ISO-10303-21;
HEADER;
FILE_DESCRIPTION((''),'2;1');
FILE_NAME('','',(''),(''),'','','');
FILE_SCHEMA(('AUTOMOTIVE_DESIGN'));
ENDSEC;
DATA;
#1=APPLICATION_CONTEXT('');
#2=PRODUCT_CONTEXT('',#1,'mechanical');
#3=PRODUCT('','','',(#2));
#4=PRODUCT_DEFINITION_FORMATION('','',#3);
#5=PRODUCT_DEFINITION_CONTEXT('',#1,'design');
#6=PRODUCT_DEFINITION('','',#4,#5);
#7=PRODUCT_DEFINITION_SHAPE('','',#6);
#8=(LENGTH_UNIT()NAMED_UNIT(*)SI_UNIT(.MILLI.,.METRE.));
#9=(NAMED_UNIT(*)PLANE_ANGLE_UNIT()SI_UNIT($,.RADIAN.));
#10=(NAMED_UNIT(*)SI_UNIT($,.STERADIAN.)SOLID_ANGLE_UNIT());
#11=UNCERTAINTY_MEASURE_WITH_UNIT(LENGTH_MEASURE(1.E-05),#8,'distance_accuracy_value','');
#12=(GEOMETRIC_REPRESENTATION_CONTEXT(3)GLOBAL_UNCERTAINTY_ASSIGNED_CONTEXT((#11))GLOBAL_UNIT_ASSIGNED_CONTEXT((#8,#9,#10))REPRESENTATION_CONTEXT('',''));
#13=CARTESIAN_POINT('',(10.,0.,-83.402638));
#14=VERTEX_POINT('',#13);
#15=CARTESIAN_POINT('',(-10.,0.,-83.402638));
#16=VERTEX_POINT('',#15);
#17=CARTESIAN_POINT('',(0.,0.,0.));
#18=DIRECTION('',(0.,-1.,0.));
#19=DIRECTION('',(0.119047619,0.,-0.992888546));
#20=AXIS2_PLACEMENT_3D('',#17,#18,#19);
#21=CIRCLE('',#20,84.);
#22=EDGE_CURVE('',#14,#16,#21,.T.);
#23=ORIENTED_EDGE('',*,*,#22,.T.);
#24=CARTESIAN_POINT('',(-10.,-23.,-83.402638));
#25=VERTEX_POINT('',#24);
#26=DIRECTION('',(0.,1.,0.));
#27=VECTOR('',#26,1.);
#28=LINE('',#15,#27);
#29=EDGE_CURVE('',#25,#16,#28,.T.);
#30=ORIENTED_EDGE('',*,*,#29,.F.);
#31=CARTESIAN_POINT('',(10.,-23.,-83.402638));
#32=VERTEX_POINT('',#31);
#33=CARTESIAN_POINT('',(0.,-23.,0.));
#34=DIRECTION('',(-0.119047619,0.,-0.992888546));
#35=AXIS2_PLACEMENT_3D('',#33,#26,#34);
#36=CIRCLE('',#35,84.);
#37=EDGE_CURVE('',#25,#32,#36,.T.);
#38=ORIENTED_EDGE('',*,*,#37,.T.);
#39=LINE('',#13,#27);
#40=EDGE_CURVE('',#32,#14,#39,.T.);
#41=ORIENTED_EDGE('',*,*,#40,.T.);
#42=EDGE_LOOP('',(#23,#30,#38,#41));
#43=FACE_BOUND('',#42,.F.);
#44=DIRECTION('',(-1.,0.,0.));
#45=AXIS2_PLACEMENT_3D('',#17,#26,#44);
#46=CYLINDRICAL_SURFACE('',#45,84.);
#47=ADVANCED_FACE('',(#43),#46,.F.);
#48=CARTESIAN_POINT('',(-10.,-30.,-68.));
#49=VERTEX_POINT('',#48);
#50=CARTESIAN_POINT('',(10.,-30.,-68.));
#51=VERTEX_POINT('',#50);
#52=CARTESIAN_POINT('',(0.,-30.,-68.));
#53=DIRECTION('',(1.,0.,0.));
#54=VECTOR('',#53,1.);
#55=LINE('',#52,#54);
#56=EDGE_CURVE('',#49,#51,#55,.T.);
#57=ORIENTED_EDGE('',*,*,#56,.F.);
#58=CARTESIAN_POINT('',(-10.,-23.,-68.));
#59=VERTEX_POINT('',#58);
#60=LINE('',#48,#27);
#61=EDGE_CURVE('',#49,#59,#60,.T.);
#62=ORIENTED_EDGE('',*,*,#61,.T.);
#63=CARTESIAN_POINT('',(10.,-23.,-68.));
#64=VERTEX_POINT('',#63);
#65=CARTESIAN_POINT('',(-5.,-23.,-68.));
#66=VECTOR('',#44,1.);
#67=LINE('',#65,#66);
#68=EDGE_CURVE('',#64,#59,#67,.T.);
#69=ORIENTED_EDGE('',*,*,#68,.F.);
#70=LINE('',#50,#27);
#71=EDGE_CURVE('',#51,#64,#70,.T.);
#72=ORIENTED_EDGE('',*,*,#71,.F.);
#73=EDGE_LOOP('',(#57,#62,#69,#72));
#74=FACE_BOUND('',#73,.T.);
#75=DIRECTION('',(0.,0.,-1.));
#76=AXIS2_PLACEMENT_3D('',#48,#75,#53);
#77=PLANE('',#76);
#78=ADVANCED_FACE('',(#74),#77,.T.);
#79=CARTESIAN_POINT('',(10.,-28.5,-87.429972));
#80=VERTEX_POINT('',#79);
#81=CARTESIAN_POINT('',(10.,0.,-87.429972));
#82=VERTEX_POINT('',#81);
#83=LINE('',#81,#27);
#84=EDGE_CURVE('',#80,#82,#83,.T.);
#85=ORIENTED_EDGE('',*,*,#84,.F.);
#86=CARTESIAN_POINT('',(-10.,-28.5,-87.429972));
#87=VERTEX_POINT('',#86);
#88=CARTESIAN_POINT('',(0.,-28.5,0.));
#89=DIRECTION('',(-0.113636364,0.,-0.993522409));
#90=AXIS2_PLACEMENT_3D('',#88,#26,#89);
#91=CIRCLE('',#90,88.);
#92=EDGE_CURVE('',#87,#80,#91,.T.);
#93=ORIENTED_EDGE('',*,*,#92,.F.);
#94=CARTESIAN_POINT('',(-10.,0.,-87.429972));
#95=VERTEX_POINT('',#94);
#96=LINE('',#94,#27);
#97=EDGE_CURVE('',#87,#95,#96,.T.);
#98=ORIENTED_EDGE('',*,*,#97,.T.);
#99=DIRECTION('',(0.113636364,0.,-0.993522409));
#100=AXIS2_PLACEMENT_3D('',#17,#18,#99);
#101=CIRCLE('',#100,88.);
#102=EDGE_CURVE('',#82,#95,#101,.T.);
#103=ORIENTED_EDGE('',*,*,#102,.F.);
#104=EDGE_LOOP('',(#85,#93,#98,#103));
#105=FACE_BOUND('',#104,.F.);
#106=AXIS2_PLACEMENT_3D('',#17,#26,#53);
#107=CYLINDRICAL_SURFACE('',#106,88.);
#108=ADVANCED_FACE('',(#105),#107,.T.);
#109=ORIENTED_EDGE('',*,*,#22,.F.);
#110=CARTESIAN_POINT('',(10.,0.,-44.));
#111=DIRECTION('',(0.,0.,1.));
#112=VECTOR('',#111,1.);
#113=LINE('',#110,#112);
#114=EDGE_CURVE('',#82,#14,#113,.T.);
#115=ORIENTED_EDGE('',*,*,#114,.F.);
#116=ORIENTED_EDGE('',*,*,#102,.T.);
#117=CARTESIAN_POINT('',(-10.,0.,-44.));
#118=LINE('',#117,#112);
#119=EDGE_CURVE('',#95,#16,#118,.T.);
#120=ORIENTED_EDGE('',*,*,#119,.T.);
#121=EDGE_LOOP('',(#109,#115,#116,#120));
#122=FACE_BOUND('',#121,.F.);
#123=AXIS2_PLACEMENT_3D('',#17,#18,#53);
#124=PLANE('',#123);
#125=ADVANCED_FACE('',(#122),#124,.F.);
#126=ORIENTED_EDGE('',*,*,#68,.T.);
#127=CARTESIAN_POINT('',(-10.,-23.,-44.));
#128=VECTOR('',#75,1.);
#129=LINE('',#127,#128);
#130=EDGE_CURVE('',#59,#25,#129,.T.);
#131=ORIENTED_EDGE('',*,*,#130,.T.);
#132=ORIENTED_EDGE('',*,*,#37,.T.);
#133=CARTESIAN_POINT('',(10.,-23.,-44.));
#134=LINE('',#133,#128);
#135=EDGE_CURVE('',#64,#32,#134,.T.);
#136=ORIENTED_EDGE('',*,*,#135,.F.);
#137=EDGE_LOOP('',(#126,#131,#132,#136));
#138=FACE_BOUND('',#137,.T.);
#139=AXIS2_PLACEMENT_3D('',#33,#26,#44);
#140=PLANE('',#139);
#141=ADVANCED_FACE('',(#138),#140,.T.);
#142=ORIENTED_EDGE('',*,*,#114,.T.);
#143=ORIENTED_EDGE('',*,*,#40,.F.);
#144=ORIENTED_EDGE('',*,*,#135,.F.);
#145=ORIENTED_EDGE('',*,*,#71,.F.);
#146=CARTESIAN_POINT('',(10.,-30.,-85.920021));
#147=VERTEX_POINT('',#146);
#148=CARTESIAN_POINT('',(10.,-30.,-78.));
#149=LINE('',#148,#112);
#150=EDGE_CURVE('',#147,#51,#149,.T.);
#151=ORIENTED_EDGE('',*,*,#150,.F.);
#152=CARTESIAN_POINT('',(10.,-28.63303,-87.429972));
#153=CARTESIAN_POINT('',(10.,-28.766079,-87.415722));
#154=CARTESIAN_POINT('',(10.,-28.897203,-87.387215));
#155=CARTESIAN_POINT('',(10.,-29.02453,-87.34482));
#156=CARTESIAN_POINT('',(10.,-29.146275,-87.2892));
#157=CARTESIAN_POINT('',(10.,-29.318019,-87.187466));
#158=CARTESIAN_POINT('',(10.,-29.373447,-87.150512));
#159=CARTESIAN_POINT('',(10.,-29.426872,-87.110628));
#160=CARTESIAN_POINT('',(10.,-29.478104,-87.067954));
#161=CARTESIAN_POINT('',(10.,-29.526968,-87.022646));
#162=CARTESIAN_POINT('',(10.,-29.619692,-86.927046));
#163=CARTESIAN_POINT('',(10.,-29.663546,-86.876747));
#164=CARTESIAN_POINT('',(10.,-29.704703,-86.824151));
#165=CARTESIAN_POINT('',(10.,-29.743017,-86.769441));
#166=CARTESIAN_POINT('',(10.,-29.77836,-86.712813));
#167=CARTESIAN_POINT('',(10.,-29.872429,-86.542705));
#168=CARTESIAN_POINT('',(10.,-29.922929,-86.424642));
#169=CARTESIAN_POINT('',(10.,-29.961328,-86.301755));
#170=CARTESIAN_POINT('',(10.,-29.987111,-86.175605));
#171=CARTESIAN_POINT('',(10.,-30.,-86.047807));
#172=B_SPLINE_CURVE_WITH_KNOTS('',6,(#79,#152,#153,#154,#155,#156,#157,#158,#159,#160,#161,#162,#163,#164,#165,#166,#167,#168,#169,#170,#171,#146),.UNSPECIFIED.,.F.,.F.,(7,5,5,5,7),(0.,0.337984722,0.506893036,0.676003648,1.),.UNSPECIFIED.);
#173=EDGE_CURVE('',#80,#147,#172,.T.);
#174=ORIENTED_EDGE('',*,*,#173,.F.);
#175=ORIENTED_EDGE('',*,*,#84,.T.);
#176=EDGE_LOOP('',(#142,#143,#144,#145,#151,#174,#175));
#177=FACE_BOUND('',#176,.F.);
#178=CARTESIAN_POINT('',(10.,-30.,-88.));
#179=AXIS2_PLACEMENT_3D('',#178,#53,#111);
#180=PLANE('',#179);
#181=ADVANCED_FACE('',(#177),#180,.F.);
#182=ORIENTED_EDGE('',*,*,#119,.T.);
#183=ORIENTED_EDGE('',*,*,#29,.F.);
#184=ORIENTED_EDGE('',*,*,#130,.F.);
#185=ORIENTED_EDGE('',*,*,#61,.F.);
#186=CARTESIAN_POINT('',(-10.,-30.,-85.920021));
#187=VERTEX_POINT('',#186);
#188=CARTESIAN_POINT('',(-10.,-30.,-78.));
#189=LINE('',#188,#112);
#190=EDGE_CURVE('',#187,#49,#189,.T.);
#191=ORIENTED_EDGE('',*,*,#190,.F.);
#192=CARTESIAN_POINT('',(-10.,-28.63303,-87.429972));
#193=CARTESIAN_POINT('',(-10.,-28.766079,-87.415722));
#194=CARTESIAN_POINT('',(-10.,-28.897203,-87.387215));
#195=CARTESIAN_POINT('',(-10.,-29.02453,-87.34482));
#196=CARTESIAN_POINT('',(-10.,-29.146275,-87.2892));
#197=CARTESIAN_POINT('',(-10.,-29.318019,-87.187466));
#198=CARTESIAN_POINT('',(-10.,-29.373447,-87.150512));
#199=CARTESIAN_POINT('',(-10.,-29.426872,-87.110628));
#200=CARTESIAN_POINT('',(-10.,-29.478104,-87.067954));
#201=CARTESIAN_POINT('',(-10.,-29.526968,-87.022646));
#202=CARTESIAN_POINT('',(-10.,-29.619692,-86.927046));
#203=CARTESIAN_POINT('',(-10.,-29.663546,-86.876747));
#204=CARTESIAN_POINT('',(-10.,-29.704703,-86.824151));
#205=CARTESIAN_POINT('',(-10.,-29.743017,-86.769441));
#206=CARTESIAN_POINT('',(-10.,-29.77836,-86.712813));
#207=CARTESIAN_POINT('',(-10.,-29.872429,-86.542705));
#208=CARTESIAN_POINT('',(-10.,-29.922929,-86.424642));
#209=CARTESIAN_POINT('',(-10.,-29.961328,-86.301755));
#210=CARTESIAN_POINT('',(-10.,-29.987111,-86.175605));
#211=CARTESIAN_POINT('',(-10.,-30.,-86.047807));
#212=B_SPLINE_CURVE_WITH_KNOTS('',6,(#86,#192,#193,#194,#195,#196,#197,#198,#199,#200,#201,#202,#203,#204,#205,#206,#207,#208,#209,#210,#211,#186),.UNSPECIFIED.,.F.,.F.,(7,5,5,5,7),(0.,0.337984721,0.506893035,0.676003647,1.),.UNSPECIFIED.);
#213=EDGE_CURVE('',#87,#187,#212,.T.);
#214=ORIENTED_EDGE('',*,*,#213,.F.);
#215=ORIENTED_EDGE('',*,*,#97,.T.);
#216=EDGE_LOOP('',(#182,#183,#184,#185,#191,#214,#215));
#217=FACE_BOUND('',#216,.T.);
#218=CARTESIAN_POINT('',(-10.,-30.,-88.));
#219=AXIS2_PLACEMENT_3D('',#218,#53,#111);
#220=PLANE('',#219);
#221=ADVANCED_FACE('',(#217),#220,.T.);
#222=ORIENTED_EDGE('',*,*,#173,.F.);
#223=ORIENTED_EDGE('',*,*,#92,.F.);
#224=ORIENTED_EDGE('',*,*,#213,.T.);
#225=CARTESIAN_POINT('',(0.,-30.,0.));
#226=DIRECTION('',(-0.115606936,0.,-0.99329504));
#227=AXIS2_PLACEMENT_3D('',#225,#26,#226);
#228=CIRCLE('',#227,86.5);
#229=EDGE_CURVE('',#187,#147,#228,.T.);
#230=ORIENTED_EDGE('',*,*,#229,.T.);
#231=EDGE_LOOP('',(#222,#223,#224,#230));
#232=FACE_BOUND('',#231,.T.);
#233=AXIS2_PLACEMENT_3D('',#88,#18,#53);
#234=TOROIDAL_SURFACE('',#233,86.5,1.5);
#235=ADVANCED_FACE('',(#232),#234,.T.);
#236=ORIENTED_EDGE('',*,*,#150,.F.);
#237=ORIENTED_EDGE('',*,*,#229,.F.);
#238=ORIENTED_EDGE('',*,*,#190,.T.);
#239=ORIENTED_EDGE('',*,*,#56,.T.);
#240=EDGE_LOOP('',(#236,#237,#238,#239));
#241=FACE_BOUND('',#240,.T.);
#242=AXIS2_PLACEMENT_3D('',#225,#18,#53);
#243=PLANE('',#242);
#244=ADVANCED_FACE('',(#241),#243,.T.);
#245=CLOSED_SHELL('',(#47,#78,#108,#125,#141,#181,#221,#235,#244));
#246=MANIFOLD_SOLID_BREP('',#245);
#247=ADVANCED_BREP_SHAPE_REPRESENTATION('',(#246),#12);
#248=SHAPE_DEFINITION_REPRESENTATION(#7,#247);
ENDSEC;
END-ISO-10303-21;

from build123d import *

# Parameters (mm, degrees)
F0_R     = 88
F1_DEPTH = 30
F2_R     = 84
F3_DEPTH = 23
F4_R     = 1.5
F5_W     = 20
F5_H     = 20
F6_DEPTH = 30.001


# Not quite as in the source:
# - a feature names something its author has since deleted; it is built from what else it names


with BuildPart() as f1:
    # F0 (on Front) → F1 (new body)
    with BuildSketch(Plane.XZ):
        Circle(F0_R)
    extrude(amount=F1_DEPTH)

    # F2 (on face) → F3 (cut)
    with BuildSketch(Plane(origin=(0, 0, 0), x_dir=(-1, 0, 0), z_dir=(0, 1, 0))):
        Circle(F2_R)
    extrude(amount=-F3_DEPTH, mode=Mode.SUBTRACT)

    # F4
    f4_edges = [f1.edges().sort_by_distance(p)[0] for p in [
        (-88, -30, 0),
    ]]
    fillet(f4_edges, radius=F4_R)

    # F5 (on face) → F6 (cut, through all)
    with BuildSketch(Plane.XZ.offset(30)):
        with Locations((0, -78)):
            Rectangle(F5_W, F5_H)
    extrude(amount=-F6_DEPTH, mode=Mode.SUBTRACT)


solid = f1.part
